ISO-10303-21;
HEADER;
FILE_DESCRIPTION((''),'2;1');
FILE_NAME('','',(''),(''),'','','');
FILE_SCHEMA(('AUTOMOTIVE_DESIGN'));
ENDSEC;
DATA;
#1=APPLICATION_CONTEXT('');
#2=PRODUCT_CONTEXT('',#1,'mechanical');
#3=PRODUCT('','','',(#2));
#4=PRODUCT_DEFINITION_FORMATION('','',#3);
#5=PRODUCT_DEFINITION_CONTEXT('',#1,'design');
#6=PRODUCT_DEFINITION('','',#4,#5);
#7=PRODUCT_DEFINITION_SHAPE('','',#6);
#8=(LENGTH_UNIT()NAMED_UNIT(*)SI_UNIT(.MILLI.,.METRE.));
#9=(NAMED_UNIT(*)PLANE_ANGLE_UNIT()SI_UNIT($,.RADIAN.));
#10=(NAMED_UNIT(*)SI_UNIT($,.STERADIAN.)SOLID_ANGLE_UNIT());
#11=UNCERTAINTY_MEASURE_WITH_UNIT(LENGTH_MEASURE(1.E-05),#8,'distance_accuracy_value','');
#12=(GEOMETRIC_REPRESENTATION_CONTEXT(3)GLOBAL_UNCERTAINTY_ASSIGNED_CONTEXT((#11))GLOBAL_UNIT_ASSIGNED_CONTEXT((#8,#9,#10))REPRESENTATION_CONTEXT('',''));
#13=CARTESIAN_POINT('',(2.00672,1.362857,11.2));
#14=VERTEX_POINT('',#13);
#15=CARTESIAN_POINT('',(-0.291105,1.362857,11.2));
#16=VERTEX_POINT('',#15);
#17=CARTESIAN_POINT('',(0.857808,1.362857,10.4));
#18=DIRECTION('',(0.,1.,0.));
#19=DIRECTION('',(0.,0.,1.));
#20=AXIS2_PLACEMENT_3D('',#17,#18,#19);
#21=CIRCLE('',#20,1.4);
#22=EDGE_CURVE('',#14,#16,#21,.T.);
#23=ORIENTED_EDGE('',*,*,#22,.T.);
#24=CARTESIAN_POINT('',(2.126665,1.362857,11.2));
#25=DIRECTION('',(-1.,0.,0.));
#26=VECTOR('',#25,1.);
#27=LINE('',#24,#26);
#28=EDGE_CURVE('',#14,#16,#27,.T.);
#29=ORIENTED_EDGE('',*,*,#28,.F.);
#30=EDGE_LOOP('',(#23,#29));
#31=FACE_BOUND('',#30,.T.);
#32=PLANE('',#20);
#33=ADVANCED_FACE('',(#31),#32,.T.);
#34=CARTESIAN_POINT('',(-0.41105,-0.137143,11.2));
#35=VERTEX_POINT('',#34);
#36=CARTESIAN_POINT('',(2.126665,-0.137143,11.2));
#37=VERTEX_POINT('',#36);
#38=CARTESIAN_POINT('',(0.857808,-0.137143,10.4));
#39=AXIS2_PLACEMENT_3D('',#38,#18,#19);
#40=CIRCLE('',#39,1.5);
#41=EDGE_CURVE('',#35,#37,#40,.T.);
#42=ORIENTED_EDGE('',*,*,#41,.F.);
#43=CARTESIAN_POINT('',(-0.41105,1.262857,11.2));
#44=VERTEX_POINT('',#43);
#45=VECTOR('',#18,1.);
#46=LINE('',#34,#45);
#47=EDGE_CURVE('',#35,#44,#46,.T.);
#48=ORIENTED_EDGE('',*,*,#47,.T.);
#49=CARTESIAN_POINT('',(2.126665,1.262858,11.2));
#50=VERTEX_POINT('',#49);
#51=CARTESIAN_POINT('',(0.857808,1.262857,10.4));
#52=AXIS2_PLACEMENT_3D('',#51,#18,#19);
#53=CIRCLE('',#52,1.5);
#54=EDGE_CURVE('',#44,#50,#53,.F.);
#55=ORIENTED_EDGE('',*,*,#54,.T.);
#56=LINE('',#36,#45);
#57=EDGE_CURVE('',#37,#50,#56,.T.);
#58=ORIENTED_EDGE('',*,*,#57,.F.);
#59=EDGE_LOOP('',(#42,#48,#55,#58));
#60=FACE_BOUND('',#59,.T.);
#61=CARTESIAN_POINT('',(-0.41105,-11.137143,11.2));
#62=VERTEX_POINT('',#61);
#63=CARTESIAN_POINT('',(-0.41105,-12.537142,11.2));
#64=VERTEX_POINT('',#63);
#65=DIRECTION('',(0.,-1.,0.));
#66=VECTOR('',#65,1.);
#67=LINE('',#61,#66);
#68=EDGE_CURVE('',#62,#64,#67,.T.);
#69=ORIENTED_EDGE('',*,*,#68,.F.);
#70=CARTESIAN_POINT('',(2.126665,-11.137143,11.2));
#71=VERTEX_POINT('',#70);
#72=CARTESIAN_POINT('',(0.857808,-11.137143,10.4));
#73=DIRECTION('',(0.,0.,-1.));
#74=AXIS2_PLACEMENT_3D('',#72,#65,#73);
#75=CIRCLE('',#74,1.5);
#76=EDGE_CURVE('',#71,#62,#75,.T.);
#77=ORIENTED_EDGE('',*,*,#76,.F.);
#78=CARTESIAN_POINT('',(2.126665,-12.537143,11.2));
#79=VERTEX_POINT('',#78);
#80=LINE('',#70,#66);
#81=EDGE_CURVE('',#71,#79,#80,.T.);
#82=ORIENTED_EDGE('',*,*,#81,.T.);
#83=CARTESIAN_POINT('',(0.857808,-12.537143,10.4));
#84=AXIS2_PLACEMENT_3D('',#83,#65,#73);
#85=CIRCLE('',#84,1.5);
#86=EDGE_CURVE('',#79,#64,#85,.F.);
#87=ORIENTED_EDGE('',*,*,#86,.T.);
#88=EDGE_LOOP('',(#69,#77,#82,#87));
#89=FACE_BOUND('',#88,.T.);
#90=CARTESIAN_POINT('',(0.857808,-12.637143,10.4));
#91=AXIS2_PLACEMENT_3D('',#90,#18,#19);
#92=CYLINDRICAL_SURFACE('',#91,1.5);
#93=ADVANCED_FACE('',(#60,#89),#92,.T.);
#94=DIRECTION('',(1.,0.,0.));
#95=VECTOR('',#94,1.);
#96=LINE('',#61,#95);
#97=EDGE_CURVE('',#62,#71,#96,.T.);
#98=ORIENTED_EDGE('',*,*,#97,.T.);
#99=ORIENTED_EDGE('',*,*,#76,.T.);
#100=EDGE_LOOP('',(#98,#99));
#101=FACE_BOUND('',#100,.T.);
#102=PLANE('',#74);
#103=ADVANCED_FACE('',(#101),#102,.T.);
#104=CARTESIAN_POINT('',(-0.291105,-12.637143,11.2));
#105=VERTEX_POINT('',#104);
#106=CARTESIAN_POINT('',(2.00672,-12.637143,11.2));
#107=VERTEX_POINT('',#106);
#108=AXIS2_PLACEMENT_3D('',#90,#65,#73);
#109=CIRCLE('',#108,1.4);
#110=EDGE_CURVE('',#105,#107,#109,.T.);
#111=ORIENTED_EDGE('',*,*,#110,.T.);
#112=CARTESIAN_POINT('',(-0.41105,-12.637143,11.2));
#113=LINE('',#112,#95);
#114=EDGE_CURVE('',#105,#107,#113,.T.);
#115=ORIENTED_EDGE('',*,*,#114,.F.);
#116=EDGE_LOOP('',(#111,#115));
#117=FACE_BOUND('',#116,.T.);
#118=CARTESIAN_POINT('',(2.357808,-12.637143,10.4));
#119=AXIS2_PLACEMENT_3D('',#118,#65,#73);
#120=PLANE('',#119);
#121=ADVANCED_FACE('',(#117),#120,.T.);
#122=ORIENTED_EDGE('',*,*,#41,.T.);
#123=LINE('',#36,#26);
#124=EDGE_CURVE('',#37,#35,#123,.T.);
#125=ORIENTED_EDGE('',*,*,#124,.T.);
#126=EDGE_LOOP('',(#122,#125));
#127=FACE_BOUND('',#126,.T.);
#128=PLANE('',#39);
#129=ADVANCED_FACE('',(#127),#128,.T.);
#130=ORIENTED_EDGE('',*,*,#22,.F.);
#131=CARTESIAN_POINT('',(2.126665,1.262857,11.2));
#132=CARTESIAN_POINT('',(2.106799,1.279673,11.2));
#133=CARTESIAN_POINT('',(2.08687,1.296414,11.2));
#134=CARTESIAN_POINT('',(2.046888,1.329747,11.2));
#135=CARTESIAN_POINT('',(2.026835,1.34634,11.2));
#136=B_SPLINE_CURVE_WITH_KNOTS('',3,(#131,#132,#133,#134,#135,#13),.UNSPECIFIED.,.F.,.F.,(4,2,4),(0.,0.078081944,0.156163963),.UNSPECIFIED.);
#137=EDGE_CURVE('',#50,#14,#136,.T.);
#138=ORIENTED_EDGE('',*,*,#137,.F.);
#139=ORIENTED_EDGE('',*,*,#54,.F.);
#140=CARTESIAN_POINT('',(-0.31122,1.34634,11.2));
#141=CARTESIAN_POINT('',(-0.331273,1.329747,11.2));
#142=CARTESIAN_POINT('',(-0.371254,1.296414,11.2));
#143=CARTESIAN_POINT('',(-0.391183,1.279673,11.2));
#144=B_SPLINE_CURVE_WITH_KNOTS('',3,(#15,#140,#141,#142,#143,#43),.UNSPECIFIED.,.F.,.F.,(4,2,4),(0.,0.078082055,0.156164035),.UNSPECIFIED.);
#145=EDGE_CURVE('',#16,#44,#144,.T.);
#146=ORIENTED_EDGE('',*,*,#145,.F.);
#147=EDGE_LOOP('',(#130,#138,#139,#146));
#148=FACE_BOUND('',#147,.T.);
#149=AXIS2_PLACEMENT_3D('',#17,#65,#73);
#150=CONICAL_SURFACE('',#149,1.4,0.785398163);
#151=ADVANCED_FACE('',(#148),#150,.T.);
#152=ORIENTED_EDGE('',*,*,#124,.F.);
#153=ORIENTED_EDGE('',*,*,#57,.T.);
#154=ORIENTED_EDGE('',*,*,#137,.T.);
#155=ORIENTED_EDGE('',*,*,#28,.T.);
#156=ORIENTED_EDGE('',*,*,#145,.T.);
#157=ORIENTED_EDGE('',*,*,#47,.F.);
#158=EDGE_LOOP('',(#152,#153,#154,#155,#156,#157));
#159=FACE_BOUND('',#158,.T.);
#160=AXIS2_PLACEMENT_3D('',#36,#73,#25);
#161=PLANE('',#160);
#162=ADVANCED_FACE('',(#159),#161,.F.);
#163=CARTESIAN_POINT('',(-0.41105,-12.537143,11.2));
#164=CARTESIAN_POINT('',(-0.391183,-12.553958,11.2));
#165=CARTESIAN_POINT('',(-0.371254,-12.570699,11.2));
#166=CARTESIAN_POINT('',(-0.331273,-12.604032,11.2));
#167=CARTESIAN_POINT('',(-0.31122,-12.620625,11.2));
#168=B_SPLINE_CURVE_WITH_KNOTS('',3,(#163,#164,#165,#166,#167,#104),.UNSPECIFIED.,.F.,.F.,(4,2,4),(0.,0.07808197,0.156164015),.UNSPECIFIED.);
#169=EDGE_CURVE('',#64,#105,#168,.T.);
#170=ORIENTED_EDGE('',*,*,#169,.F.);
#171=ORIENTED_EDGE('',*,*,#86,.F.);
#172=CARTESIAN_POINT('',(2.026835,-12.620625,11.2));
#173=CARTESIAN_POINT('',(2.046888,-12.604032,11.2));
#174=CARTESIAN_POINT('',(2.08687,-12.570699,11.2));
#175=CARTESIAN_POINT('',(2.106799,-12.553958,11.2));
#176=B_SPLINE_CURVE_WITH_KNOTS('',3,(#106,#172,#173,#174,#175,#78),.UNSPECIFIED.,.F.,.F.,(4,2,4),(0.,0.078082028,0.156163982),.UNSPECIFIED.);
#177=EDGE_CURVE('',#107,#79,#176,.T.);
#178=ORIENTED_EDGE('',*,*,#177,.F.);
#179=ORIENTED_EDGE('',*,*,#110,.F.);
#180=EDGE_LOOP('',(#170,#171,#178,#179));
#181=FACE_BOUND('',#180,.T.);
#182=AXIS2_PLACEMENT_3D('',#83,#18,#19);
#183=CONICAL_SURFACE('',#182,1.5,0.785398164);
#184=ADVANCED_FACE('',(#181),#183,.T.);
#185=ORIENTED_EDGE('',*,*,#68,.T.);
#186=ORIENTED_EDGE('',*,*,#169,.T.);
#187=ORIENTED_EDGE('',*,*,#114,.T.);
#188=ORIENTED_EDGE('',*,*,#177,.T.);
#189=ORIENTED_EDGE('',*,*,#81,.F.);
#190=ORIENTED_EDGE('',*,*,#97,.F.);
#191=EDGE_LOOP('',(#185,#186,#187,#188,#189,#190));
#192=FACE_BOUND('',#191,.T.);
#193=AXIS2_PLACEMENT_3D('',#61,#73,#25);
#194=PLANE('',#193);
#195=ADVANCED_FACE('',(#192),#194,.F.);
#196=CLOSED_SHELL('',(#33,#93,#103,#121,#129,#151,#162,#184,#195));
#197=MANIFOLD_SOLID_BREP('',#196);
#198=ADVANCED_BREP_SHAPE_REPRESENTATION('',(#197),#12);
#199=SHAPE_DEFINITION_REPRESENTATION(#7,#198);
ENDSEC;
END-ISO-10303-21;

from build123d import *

# Parameters (mm, degrees)
ESQUISSE1_W             = 1.5
ESQUISSE1_H             = 14
ENL_V_START             = -1.5
ENL_V_MAT_EXTRU_1_DEPTH = 1.5
ENL_V_MAT_EXTRU_2_DEPTH = 1.5
CHANFREIN1_SIZE         = 0.1
CHANFREIN2_SIZE         = 0.1


with BuildPart() as part:
    # Esquisse1 → Révolution1 (revolve)
    with BuildSketch(Plane(origin=(0, 0, 10.4), x_dir=(-1, 0, 0), z_dir=(0, 0, -1))):
        with Locations((-1.607807721, -5.637142552)):
            Rectangle(ESQUISSE1_W, ESQUISSE1_H)
    revolve(axis=Axis((0.857807721, -12.637142552, 10.4), (0, 1, 0)))

    # Esquisse2 → Enlèv. mat.-Extru.1 (cut)
    with BuildSketch(Plane(origin=(0, 1.362857448, 0), x_dir=(-1, 0, 0), z_dir=(0, 1, 0)).offset(ENL_V_START)):
        with BuildLine():
            Line((-2.12666531, 11.2), (0.411050198, 11.2))
            ThreePointArc((0.411050198, 11.2), (-0.857807556, 11.9), (-2.12666531, 11.2))
        make_face()
    extrude(amount=ENL_V_MAT_EXTRU_1_DEPTH, mode=Mode.SUBTRACT)

    # Esquisse3 → Enlèv. mat.-Extru.2 (cut)
    with BuildSketch(Plane.XZ.offset(12.637142552)):
        with BuildLine():
            Line((-0.41105011, 11.2), (2.126665398, 11.2))
            ThreePointArc((2.126665398, 11.2), (0.857807644, 11.9), (-0.41105011, 11.2))
        make_face()
    extrude(amount=-ENL_V_MAT_EXTRU_2_DEPTH, mode=Mode.SUBTRACT)

    # Chanfrein1
    chanfrein1_edges = [part.edges().sort_by_distance(p)[0] for p in [
        (0.44144652, 1.362857448, 8.958943668),
    ]]
    chamfer(chanfrein1_edges, length=CHANFREIN1_SIZE)

    # Chanfrein2
    chanfrein2_edges = [part.edges().sort_by_distance(p)[0] for p in [
        (0.441446497, -12.637142552, 8.958943675),
    ]]
    chamfer(chanfrein2_edges, length=CHANFREIN2_SIZE)


solid = part.part
